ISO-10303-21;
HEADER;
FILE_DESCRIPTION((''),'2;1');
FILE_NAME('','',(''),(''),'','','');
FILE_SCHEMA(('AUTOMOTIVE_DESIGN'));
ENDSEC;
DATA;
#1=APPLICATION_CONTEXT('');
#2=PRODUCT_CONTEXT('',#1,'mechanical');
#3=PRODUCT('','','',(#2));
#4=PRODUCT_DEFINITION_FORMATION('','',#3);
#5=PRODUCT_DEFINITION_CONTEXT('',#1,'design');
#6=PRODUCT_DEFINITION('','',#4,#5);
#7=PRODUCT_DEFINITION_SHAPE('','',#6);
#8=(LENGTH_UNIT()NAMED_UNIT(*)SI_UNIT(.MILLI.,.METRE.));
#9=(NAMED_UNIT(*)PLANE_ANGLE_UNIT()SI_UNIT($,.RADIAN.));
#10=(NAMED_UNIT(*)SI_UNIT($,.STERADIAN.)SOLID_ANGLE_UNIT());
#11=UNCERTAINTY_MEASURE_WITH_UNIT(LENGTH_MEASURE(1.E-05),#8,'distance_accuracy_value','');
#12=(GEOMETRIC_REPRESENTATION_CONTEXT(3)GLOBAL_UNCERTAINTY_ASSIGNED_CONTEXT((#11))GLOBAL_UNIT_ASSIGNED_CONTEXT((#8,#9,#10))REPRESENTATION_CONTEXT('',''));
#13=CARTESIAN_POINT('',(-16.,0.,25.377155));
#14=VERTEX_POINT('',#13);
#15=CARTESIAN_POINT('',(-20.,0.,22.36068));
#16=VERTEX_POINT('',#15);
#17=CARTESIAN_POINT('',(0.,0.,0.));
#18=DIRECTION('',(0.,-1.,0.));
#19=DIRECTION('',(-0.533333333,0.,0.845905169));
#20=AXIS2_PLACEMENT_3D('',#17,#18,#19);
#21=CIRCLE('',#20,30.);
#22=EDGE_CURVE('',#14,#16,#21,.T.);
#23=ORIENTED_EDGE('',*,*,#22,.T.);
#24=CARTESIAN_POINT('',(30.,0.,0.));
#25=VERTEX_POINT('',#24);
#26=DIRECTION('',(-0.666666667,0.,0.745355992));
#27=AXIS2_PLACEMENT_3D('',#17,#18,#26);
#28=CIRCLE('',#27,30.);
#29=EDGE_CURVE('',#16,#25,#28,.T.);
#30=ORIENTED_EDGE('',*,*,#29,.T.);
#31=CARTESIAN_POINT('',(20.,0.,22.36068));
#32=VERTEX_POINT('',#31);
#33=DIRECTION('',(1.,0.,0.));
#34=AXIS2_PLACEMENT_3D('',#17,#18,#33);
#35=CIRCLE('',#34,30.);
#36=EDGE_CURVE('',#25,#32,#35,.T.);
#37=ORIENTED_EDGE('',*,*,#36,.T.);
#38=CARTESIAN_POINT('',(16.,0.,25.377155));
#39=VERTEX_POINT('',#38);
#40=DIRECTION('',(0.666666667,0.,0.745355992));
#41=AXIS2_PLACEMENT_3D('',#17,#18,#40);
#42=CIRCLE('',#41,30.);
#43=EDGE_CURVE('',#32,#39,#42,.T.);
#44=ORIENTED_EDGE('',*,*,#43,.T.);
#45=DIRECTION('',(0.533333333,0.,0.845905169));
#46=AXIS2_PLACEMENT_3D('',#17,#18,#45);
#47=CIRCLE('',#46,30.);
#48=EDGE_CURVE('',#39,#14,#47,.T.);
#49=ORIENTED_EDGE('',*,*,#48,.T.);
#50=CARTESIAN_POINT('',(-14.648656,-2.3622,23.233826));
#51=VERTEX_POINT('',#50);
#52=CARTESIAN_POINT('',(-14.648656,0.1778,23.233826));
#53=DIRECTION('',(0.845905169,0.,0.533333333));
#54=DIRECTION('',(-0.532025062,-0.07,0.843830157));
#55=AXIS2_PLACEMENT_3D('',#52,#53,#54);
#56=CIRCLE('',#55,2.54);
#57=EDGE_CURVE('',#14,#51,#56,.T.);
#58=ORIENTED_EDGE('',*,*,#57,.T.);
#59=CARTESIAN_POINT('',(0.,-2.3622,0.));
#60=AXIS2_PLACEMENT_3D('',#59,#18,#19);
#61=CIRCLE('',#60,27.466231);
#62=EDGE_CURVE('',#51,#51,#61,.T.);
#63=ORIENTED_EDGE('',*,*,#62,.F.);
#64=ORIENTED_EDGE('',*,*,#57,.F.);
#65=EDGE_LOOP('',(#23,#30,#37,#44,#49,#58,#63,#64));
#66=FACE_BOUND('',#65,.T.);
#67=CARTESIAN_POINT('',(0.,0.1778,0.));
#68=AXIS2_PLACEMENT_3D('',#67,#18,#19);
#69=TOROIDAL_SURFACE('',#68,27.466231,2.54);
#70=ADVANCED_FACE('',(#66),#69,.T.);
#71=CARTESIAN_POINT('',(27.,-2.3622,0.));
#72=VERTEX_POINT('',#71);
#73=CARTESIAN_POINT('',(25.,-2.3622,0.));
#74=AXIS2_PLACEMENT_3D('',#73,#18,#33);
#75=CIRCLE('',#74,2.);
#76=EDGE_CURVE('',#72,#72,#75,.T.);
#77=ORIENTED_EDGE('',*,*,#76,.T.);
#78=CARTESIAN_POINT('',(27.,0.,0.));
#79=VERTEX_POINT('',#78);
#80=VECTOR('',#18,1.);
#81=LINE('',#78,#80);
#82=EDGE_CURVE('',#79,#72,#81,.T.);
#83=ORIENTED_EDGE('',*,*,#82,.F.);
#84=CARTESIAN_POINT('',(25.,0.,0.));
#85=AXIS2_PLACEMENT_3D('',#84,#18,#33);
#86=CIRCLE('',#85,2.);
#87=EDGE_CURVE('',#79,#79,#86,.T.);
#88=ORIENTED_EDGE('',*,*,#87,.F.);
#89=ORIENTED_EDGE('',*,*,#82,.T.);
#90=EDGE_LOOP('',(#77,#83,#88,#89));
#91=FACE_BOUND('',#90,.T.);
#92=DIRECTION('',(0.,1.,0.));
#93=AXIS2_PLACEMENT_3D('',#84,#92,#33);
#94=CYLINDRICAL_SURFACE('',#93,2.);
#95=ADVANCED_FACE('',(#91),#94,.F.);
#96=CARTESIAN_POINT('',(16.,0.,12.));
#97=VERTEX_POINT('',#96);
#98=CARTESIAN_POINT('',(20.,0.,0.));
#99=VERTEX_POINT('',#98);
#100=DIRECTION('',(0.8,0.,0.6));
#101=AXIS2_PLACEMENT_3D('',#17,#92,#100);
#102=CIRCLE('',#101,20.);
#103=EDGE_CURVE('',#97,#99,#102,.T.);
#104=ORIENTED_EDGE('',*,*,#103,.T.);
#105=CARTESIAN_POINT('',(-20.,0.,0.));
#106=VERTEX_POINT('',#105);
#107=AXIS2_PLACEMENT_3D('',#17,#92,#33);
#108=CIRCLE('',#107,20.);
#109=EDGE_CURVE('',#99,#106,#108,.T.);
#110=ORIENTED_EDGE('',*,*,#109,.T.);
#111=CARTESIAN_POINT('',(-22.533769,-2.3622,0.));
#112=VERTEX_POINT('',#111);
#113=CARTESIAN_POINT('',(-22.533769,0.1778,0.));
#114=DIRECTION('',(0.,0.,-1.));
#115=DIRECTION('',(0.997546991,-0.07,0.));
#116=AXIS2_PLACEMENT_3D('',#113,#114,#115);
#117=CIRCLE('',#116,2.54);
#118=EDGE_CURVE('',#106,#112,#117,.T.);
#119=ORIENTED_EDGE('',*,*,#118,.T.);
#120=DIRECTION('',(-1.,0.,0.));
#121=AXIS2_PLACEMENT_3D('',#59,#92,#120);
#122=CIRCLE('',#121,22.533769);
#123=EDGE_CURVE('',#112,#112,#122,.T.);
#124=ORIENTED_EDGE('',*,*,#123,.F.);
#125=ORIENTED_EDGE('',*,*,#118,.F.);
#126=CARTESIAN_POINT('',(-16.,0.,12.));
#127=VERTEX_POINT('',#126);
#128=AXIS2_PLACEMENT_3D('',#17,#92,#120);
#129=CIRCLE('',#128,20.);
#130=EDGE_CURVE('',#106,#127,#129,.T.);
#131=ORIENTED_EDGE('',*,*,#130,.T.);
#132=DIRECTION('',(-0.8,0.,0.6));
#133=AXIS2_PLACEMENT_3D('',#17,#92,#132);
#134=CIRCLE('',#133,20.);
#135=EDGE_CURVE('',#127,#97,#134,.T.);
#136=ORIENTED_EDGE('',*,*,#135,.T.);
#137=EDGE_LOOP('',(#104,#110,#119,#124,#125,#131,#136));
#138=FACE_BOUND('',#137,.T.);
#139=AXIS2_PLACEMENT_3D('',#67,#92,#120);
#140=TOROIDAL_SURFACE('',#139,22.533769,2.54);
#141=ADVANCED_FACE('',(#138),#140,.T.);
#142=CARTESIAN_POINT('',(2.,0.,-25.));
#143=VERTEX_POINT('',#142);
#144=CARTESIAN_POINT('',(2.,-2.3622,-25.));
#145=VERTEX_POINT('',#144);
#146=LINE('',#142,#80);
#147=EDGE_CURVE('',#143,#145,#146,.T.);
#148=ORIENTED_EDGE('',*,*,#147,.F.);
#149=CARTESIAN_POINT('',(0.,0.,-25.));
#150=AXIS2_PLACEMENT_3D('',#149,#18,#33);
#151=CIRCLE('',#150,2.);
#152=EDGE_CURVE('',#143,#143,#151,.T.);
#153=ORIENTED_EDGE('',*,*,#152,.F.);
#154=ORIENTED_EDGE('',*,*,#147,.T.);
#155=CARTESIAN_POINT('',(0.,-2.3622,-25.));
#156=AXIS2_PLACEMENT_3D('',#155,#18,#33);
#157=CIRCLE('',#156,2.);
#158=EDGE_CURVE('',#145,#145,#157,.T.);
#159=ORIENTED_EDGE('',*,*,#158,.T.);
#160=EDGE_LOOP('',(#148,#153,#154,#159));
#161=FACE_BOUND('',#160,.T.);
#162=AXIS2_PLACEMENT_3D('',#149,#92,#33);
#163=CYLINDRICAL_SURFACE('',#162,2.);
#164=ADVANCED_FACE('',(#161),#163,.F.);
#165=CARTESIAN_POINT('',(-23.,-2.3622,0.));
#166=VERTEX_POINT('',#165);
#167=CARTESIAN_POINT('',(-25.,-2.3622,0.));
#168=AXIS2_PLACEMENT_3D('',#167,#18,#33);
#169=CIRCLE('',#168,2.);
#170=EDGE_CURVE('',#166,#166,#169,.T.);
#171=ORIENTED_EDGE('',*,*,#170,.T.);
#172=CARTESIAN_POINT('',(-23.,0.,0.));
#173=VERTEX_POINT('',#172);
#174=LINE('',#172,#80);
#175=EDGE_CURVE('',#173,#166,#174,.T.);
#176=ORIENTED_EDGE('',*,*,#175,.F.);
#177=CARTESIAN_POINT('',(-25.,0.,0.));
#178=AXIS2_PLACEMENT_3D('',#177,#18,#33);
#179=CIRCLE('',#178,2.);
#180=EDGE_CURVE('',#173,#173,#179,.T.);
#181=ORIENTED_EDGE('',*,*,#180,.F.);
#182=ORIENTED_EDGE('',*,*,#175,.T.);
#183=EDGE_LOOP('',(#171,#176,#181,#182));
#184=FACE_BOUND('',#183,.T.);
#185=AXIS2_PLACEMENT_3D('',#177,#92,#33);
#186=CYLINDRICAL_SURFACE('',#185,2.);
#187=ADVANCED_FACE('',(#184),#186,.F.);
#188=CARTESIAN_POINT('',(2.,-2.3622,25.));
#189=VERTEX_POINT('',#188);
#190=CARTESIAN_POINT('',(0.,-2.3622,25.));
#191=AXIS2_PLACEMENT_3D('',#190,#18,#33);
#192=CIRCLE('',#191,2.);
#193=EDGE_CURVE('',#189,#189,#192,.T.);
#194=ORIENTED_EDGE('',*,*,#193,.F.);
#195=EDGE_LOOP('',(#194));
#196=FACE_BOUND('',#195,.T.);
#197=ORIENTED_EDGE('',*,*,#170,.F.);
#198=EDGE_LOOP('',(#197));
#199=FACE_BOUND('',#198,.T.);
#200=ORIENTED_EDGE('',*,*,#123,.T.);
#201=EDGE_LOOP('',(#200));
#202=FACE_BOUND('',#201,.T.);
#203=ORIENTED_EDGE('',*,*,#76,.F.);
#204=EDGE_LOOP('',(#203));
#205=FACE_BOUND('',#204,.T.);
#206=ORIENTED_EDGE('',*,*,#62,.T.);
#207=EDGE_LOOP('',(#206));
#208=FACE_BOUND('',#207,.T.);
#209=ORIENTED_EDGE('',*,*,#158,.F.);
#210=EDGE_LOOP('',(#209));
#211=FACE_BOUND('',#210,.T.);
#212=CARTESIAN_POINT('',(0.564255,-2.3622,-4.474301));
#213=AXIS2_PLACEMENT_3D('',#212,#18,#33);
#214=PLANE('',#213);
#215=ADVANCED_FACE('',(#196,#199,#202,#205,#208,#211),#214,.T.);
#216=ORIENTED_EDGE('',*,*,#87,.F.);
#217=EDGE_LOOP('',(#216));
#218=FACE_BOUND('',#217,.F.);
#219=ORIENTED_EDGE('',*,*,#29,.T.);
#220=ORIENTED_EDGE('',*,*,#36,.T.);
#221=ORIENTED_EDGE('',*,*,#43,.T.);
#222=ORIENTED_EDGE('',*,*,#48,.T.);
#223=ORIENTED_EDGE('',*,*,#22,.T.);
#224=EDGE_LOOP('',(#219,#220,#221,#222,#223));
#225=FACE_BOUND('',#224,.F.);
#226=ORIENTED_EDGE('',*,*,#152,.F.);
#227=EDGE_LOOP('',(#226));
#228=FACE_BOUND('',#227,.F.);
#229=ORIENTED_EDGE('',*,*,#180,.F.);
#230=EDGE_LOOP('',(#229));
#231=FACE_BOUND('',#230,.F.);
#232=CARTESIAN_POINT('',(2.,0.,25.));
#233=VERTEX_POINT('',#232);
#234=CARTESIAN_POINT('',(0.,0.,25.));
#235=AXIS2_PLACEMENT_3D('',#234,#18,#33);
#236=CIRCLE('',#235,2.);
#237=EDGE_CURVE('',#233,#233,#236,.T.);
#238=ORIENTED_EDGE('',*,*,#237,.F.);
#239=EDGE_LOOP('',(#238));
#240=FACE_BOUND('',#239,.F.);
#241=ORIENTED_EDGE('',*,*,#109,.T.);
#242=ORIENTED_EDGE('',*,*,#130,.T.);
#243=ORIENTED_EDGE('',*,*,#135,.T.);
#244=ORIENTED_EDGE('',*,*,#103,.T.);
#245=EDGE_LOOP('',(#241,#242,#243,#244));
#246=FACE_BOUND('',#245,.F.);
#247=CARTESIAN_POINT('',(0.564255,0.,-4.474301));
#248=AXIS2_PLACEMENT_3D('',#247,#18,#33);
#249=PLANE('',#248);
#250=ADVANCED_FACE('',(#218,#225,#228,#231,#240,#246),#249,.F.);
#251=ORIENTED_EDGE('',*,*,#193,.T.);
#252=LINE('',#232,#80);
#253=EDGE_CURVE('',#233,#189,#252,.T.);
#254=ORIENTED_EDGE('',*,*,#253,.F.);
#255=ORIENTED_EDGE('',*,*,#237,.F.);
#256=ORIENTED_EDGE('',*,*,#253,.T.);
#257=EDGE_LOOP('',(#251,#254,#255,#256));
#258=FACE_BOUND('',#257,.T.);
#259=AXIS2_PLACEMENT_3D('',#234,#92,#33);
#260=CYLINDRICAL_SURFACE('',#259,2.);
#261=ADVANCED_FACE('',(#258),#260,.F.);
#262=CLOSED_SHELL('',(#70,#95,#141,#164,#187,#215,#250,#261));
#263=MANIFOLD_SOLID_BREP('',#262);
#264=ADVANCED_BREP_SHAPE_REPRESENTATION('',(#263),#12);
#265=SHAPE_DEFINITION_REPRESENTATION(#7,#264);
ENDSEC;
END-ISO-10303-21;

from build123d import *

# Parameters (mm, degrees)
F0_R     = 2
F1_DEPTH = 2.3622


# Not quite as in the source:
# - a fillet or chamfer that OpenCascade refuses, or shapes differently, is made with other operations: its cross-section is extruded or revolved along the edge and cut away or added


with BuildPart() as f1:
    # F0 (on Front) → F1 (new body)
    with BuildSketch(Plane.XZ):
        with BuildLine():
            Line((20, 22.360679775), (20, 0))
            ThreePointArc((20, 0), (0, -20), (-20, 0))
            Line((-20, 0), (-20, 22.360679775))
            ThreePointArc((-20, 22.360679775), (-12.2474487139, -27.3861278753), (30, 0))
            ThreePointArc((30, 0), (27.3861278753, 12.2474487139), (20, 22.360679775))
        make_face()
        with Locations((0, -25)):
            Circle(F0_R, mode=Mode.SUBTRACT)
        with Locations((-25, 0)):
            Circle(F0_R, mode=Mode.SUBTRACT)
        with Locations((25, 0)):
            Circle(F0_R, mode=Mode.SUBTRACT)
        with BuildLine():
            ThreePointArc((-16, 12), (0, 20), (16, 12))
            Line((16, 12), (16, 25.3771550809))
            ThreePointArc((16, 25.3771550809), (0, 30), (-16, 25.3771550809))
            Line((-16, 25.3771550809), (-16, 12))
        make_face()
        with Locations((0, 25)):
            Circle(F0_R, mode=Mode.SUBTRACT)
        with BuildLine():
            Line((16, 25.3771550809), (16, 12))
            ThreePointArc((16, 12), (18.973665961, 6.3245553203), (20, 0))
            Line((20, 0), (20, 22.360679775))
            ThreePointArc((20, 22.360679775), (18.0630778335, 23.9525618501), (16, 25.3771550809))
        make_face()
        with BuildLine():
            ThreePointArc((-20, 0), (-18.973665961, 6.3245553203), (-16, 12))
            Line((-16, 12), (-16, 25.3771550809))
            ThreePointArc((-16, 25.3771550809), (-18.0630778335, 23.9525618501), (-20, 22.360679775))
            Line((-20, 22.360679775), (-20, 0))
        make_face()
    extrude(amount=F1_DEPTH)

    # F2: fillet of radius 2.54 on 2 edges, made by hand

    # F2_s1 → F2_t2 (revolve, cut)
    with BuildSketch(Plane(origin=(0, 0, 0), x_dir=(0, 1, 0), z_dir=(0.8459051694, 0, 0.5333333333))):
        with BuildLine():
            ThreePointArc((0, 30), (-1.6800498325, 29.1982797174), (-2.3622, 27.4662306419))
            Line((-2.3622, 27.4662306419), (-2.3622, 30))
            Line((-2.3622, 30), (0, 30))
        make_face()
    revolve(axis=Axis((0, -2.3622, 0), (0, -1, 0)), mode=Mode.SUBTRACT)

    # F2_s3 → F2_t4 (revolve, cut)
    with BuildSketch(Plane.XY):
        with BuildLine():
            ThreePointArc((-20, 0), (-20.8017202826, -1.6800498325), (-22.5337693581, -2.3622))
            Line((-22.5337693581, -2.3622), (-20, -2.3622))
            Line((-20, -2.3622), (-20, 0))
        make_face()
    revolve(axis=Axis((0, -2.3622, 0), (0, 1, 0)), mode=Mode.SUBTRACT)


solid = f1.part
